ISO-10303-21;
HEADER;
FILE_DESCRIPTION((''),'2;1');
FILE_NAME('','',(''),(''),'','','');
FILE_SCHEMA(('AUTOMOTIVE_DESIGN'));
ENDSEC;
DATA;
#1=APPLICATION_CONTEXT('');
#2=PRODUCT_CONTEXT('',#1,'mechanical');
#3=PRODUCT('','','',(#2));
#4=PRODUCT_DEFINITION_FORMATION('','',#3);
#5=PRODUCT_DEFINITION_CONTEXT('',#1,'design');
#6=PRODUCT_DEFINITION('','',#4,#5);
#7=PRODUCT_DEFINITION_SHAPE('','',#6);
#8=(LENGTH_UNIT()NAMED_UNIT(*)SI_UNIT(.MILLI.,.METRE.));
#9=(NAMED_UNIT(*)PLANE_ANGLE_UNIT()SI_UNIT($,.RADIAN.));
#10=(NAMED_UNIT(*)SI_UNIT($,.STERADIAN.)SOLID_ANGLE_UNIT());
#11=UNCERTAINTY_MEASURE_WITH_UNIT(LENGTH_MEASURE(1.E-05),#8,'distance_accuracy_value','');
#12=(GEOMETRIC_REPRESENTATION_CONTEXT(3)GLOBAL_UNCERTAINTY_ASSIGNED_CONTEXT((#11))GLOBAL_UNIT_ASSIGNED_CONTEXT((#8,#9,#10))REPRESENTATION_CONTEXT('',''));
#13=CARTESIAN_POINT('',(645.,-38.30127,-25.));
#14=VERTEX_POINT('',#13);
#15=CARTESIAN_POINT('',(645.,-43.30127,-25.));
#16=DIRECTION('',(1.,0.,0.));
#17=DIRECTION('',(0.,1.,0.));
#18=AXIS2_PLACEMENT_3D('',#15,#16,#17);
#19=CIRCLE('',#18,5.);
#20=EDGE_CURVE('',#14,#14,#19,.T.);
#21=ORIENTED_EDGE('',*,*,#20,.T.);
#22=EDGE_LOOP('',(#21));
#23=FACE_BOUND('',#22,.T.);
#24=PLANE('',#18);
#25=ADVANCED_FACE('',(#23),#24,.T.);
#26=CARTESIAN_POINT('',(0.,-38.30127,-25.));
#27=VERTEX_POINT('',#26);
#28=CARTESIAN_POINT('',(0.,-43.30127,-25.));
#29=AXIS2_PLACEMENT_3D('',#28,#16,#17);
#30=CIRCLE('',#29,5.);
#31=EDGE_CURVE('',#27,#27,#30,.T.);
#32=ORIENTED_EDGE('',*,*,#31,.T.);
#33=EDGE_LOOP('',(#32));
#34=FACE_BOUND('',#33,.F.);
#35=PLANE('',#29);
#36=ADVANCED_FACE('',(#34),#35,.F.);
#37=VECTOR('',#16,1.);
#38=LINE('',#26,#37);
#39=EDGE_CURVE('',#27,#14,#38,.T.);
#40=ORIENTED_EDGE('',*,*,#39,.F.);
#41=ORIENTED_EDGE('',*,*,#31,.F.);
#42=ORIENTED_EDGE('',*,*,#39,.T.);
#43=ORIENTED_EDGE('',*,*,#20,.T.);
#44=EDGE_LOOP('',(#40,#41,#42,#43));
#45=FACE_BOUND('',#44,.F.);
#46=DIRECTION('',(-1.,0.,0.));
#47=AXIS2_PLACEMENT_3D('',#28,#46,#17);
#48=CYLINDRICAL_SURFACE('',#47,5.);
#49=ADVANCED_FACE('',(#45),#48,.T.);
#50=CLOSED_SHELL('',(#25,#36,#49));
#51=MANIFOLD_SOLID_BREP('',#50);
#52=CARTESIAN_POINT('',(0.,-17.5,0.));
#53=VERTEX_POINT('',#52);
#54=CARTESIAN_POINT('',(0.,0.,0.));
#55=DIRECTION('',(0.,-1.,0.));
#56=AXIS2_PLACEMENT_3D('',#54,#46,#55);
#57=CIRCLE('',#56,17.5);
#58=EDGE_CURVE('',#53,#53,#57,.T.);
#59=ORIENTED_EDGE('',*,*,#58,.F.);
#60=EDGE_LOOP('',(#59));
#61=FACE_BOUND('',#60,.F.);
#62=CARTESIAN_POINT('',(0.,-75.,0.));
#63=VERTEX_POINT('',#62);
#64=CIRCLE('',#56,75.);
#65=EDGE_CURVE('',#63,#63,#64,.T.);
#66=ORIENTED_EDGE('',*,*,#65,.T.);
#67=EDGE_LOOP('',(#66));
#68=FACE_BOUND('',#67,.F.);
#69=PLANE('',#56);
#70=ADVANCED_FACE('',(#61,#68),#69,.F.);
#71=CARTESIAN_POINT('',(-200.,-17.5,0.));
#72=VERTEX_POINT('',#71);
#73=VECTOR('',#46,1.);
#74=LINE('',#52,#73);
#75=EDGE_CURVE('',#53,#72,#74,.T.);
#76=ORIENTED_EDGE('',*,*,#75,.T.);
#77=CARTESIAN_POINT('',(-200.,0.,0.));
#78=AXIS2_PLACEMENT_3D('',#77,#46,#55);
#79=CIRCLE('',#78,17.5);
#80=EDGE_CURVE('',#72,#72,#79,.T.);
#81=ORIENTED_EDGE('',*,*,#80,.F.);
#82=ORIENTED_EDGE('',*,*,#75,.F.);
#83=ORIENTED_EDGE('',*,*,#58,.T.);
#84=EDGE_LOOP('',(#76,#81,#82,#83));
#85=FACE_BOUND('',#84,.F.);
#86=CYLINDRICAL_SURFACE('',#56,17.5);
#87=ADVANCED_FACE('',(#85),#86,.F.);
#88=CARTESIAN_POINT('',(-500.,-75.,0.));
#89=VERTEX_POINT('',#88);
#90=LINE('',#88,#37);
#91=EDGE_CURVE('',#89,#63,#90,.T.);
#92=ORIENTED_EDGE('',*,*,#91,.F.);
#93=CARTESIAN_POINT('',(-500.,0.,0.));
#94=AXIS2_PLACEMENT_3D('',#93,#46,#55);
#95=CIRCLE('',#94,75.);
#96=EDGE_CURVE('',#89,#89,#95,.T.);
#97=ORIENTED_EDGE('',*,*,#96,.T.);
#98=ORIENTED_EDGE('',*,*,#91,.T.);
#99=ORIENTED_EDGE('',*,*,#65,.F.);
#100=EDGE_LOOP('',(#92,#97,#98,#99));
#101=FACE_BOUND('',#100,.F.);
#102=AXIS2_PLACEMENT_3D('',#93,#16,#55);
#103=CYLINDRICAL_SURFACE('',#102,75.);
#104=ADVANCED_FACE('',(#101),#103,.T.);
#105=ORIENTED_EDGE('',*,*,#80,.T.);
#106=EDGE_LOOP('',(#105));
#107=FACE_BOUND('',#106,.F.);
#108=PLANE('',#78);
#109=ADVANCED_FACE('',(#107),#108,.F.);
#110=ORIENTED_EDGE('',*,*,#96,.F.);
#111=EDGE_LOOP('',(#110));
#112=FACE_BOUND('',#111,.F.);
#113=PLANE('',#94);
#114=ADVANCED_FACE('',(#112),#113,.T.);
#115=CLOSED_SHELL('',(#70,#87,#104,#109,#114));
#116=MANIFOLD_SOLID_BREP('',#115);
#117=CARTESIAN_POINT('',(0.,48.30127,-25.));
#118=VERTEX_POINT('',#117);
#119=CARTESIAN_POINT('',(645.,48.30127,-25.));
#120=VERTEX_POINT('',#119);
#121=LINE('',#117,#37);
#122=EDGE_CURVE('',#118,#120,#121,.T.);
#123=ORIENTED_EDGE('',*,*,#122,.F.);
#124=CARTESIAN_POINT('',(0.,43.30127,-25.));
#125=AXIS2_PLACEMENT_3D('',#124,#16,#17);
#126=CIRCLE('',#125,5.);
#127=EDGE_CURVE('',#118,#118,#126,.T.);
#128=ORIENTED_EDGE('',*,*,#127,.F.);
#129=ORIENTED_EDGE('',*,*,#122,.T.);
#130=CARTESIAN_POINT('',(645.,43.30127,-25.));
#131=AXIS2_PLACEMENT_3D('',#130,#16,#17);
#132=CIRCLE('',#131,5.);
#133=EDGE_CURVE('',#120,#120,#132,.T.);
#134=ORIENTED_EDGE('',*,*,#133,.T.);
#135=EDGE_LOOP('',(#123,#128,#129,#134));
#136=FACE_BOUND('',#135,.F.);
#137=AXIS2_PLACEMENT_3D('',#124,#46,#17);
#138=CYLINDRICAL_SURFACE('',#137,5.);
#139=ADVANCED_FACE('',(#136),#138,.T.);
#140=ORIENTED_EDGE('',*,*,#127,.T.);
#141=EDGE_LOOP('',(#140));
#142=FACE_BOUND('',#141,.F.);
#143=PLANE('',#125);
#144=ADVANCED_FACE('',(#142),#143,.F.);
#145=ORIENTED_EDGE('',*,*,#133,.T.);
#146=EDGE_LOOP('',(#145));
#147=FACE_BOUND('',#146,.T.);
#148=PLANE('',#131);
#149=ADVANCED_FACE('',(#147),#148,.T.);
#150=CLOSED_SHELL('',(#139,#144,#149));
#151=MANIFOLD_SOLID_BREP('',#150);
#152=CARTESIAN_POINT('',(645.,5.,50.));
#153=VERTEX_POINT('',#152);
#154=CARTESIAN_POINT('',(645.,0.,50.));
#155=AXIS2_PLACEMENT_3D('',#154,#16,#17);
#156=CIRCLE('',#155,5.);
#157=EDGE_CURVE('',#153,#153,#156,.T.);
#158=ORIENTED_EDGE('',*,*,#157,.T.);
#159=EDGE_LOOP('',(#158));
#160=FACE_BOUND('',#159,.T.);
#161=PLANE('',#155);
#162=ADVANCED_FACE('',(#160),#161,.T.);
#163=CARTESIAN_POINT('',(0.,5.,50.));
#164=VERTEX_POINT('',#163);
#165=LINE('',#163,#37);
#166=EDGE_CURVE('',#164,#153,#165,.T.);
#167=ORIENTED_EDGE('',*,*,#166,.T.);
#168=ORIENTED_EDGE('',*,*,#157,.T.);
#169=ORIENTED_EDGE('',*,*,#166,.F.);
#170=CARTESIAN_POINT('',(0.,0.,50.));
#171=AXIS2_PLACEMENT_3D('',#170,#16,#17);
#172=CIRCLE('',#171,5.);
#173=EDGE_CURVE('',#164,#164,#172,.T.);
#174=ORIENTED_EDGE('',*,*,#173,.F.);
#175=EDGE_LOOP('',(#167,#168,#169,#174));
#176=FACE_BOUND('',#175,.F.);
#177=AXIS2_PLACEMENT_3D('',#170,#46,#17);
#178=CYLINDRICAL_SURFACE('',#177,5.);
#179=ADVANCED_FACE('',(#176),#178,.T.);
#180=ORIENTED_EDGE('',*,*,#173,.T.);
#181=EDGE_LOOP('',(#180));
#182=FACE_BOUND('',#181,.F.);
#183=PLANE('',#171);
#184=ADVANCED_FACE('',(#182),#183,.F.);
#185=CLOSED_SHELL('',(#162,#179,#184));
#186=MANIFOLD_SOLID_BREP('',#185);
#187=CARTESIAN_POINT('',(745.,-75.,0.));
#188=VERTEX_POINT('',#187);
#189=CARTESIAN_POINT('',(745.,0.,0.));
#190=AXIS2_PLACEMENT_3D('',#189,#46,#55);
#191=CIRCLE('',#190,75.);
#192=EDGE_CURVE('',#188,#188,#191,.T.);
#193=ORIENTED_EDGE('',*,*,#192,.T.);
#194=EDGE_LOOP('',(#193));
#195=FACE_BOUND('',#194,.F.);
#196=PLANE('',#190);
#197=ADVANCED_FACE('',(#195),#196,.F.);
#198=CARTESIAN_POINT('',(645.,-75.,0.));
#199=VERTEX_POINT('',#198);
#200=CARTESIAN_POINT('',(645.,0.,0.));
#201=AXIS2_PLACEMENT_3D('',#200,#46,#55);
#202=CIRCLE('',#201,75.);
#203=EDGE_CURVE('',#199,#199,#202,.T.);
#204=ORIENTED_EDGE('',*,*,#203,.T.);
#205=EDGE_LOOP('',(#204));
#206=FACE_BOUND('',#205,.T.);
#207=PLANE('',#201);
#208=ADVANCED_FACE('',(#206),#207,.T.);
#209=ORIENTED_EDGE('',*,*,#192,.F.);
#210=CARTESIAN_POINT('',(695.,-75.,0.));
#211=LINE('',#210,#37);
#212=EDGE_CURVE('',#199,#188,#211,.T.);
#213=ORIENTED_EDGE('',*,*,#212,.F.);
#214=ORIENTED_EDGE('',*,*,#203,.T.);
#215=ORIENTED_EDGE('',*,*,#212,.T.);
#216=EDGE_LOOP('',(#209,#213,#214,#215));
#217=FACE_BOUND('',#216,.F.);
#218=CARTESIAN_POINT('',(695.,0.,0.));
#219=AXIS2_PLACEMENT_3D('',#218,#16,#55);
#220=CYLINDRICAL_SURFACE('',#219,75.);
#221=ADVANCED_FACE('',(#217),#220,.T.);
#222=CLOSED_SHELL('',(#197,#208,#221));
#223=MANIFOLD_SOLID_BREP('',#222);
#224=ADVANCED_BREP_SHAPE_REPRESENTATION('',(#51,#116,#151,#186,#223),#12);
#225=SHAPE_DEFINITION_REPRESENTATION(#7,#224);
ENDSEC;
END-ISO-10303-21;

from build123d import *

# Parameters (mm, degrees)
F1_W     = 100
F1_H     = 75
F3_R     = 5
F4_DEPTH = 645


# Not quite as in the source:
# - a feature names something its author has since deleted; it is built from what else it names


with BuildPart() as f2:
    # F0 (on Top) → F2 (revolve)
    with BuildSketch(Plane.XY):
        Polygon((-200, 0), (-500, 0), (-500, -75), (0, -75), (0, -17.5), (-200, -17.5), align=None)
    revolve(axis=Axis((-350, 0, 0), (-1, 0, 0)))


with BuildPart() as f2b:
    # F1 (on Top) → F2, piece 2 (revolve)
    with BuildSketch(Plane.XY):
        with Locations((695, -37.5)):
            Rectangle(F1_W, F1_H)
    revolve(axis=Axis((-350, 0, 0), (-1, 0, 0)))


with BuildPart() as f4:
    # F3 (on Right) → F4 (new body, through all)
    with BuildSketch(Plane.YZ):
        with Locations((0, 50)):
            Circle(F3_R)
    extrude(amount=F4_DEPTH)


with BuildPart() as f4b:
    # F3 (on Right) → F4, piece 2 (new body, through all)
    with BuildSketch(Plane.YZ):
        with Locations((-43.3012701892, -25)):
            Circle(F3_R)
    extrude(amount=F4_DEPTH)


with BuildPart() as f4c:
    # F3 (on Right) → F4, piece 3 (new body, through all)
    with BuildSketch(Plane.YZ):
        with Locations((43.3012701892, -25)):
            Circle(F3_R)
    extrude(amount=F4_DEPTH)


solid = Compound([f2.part, f2b.part, f4.part, f4b.part, f4c.part])
